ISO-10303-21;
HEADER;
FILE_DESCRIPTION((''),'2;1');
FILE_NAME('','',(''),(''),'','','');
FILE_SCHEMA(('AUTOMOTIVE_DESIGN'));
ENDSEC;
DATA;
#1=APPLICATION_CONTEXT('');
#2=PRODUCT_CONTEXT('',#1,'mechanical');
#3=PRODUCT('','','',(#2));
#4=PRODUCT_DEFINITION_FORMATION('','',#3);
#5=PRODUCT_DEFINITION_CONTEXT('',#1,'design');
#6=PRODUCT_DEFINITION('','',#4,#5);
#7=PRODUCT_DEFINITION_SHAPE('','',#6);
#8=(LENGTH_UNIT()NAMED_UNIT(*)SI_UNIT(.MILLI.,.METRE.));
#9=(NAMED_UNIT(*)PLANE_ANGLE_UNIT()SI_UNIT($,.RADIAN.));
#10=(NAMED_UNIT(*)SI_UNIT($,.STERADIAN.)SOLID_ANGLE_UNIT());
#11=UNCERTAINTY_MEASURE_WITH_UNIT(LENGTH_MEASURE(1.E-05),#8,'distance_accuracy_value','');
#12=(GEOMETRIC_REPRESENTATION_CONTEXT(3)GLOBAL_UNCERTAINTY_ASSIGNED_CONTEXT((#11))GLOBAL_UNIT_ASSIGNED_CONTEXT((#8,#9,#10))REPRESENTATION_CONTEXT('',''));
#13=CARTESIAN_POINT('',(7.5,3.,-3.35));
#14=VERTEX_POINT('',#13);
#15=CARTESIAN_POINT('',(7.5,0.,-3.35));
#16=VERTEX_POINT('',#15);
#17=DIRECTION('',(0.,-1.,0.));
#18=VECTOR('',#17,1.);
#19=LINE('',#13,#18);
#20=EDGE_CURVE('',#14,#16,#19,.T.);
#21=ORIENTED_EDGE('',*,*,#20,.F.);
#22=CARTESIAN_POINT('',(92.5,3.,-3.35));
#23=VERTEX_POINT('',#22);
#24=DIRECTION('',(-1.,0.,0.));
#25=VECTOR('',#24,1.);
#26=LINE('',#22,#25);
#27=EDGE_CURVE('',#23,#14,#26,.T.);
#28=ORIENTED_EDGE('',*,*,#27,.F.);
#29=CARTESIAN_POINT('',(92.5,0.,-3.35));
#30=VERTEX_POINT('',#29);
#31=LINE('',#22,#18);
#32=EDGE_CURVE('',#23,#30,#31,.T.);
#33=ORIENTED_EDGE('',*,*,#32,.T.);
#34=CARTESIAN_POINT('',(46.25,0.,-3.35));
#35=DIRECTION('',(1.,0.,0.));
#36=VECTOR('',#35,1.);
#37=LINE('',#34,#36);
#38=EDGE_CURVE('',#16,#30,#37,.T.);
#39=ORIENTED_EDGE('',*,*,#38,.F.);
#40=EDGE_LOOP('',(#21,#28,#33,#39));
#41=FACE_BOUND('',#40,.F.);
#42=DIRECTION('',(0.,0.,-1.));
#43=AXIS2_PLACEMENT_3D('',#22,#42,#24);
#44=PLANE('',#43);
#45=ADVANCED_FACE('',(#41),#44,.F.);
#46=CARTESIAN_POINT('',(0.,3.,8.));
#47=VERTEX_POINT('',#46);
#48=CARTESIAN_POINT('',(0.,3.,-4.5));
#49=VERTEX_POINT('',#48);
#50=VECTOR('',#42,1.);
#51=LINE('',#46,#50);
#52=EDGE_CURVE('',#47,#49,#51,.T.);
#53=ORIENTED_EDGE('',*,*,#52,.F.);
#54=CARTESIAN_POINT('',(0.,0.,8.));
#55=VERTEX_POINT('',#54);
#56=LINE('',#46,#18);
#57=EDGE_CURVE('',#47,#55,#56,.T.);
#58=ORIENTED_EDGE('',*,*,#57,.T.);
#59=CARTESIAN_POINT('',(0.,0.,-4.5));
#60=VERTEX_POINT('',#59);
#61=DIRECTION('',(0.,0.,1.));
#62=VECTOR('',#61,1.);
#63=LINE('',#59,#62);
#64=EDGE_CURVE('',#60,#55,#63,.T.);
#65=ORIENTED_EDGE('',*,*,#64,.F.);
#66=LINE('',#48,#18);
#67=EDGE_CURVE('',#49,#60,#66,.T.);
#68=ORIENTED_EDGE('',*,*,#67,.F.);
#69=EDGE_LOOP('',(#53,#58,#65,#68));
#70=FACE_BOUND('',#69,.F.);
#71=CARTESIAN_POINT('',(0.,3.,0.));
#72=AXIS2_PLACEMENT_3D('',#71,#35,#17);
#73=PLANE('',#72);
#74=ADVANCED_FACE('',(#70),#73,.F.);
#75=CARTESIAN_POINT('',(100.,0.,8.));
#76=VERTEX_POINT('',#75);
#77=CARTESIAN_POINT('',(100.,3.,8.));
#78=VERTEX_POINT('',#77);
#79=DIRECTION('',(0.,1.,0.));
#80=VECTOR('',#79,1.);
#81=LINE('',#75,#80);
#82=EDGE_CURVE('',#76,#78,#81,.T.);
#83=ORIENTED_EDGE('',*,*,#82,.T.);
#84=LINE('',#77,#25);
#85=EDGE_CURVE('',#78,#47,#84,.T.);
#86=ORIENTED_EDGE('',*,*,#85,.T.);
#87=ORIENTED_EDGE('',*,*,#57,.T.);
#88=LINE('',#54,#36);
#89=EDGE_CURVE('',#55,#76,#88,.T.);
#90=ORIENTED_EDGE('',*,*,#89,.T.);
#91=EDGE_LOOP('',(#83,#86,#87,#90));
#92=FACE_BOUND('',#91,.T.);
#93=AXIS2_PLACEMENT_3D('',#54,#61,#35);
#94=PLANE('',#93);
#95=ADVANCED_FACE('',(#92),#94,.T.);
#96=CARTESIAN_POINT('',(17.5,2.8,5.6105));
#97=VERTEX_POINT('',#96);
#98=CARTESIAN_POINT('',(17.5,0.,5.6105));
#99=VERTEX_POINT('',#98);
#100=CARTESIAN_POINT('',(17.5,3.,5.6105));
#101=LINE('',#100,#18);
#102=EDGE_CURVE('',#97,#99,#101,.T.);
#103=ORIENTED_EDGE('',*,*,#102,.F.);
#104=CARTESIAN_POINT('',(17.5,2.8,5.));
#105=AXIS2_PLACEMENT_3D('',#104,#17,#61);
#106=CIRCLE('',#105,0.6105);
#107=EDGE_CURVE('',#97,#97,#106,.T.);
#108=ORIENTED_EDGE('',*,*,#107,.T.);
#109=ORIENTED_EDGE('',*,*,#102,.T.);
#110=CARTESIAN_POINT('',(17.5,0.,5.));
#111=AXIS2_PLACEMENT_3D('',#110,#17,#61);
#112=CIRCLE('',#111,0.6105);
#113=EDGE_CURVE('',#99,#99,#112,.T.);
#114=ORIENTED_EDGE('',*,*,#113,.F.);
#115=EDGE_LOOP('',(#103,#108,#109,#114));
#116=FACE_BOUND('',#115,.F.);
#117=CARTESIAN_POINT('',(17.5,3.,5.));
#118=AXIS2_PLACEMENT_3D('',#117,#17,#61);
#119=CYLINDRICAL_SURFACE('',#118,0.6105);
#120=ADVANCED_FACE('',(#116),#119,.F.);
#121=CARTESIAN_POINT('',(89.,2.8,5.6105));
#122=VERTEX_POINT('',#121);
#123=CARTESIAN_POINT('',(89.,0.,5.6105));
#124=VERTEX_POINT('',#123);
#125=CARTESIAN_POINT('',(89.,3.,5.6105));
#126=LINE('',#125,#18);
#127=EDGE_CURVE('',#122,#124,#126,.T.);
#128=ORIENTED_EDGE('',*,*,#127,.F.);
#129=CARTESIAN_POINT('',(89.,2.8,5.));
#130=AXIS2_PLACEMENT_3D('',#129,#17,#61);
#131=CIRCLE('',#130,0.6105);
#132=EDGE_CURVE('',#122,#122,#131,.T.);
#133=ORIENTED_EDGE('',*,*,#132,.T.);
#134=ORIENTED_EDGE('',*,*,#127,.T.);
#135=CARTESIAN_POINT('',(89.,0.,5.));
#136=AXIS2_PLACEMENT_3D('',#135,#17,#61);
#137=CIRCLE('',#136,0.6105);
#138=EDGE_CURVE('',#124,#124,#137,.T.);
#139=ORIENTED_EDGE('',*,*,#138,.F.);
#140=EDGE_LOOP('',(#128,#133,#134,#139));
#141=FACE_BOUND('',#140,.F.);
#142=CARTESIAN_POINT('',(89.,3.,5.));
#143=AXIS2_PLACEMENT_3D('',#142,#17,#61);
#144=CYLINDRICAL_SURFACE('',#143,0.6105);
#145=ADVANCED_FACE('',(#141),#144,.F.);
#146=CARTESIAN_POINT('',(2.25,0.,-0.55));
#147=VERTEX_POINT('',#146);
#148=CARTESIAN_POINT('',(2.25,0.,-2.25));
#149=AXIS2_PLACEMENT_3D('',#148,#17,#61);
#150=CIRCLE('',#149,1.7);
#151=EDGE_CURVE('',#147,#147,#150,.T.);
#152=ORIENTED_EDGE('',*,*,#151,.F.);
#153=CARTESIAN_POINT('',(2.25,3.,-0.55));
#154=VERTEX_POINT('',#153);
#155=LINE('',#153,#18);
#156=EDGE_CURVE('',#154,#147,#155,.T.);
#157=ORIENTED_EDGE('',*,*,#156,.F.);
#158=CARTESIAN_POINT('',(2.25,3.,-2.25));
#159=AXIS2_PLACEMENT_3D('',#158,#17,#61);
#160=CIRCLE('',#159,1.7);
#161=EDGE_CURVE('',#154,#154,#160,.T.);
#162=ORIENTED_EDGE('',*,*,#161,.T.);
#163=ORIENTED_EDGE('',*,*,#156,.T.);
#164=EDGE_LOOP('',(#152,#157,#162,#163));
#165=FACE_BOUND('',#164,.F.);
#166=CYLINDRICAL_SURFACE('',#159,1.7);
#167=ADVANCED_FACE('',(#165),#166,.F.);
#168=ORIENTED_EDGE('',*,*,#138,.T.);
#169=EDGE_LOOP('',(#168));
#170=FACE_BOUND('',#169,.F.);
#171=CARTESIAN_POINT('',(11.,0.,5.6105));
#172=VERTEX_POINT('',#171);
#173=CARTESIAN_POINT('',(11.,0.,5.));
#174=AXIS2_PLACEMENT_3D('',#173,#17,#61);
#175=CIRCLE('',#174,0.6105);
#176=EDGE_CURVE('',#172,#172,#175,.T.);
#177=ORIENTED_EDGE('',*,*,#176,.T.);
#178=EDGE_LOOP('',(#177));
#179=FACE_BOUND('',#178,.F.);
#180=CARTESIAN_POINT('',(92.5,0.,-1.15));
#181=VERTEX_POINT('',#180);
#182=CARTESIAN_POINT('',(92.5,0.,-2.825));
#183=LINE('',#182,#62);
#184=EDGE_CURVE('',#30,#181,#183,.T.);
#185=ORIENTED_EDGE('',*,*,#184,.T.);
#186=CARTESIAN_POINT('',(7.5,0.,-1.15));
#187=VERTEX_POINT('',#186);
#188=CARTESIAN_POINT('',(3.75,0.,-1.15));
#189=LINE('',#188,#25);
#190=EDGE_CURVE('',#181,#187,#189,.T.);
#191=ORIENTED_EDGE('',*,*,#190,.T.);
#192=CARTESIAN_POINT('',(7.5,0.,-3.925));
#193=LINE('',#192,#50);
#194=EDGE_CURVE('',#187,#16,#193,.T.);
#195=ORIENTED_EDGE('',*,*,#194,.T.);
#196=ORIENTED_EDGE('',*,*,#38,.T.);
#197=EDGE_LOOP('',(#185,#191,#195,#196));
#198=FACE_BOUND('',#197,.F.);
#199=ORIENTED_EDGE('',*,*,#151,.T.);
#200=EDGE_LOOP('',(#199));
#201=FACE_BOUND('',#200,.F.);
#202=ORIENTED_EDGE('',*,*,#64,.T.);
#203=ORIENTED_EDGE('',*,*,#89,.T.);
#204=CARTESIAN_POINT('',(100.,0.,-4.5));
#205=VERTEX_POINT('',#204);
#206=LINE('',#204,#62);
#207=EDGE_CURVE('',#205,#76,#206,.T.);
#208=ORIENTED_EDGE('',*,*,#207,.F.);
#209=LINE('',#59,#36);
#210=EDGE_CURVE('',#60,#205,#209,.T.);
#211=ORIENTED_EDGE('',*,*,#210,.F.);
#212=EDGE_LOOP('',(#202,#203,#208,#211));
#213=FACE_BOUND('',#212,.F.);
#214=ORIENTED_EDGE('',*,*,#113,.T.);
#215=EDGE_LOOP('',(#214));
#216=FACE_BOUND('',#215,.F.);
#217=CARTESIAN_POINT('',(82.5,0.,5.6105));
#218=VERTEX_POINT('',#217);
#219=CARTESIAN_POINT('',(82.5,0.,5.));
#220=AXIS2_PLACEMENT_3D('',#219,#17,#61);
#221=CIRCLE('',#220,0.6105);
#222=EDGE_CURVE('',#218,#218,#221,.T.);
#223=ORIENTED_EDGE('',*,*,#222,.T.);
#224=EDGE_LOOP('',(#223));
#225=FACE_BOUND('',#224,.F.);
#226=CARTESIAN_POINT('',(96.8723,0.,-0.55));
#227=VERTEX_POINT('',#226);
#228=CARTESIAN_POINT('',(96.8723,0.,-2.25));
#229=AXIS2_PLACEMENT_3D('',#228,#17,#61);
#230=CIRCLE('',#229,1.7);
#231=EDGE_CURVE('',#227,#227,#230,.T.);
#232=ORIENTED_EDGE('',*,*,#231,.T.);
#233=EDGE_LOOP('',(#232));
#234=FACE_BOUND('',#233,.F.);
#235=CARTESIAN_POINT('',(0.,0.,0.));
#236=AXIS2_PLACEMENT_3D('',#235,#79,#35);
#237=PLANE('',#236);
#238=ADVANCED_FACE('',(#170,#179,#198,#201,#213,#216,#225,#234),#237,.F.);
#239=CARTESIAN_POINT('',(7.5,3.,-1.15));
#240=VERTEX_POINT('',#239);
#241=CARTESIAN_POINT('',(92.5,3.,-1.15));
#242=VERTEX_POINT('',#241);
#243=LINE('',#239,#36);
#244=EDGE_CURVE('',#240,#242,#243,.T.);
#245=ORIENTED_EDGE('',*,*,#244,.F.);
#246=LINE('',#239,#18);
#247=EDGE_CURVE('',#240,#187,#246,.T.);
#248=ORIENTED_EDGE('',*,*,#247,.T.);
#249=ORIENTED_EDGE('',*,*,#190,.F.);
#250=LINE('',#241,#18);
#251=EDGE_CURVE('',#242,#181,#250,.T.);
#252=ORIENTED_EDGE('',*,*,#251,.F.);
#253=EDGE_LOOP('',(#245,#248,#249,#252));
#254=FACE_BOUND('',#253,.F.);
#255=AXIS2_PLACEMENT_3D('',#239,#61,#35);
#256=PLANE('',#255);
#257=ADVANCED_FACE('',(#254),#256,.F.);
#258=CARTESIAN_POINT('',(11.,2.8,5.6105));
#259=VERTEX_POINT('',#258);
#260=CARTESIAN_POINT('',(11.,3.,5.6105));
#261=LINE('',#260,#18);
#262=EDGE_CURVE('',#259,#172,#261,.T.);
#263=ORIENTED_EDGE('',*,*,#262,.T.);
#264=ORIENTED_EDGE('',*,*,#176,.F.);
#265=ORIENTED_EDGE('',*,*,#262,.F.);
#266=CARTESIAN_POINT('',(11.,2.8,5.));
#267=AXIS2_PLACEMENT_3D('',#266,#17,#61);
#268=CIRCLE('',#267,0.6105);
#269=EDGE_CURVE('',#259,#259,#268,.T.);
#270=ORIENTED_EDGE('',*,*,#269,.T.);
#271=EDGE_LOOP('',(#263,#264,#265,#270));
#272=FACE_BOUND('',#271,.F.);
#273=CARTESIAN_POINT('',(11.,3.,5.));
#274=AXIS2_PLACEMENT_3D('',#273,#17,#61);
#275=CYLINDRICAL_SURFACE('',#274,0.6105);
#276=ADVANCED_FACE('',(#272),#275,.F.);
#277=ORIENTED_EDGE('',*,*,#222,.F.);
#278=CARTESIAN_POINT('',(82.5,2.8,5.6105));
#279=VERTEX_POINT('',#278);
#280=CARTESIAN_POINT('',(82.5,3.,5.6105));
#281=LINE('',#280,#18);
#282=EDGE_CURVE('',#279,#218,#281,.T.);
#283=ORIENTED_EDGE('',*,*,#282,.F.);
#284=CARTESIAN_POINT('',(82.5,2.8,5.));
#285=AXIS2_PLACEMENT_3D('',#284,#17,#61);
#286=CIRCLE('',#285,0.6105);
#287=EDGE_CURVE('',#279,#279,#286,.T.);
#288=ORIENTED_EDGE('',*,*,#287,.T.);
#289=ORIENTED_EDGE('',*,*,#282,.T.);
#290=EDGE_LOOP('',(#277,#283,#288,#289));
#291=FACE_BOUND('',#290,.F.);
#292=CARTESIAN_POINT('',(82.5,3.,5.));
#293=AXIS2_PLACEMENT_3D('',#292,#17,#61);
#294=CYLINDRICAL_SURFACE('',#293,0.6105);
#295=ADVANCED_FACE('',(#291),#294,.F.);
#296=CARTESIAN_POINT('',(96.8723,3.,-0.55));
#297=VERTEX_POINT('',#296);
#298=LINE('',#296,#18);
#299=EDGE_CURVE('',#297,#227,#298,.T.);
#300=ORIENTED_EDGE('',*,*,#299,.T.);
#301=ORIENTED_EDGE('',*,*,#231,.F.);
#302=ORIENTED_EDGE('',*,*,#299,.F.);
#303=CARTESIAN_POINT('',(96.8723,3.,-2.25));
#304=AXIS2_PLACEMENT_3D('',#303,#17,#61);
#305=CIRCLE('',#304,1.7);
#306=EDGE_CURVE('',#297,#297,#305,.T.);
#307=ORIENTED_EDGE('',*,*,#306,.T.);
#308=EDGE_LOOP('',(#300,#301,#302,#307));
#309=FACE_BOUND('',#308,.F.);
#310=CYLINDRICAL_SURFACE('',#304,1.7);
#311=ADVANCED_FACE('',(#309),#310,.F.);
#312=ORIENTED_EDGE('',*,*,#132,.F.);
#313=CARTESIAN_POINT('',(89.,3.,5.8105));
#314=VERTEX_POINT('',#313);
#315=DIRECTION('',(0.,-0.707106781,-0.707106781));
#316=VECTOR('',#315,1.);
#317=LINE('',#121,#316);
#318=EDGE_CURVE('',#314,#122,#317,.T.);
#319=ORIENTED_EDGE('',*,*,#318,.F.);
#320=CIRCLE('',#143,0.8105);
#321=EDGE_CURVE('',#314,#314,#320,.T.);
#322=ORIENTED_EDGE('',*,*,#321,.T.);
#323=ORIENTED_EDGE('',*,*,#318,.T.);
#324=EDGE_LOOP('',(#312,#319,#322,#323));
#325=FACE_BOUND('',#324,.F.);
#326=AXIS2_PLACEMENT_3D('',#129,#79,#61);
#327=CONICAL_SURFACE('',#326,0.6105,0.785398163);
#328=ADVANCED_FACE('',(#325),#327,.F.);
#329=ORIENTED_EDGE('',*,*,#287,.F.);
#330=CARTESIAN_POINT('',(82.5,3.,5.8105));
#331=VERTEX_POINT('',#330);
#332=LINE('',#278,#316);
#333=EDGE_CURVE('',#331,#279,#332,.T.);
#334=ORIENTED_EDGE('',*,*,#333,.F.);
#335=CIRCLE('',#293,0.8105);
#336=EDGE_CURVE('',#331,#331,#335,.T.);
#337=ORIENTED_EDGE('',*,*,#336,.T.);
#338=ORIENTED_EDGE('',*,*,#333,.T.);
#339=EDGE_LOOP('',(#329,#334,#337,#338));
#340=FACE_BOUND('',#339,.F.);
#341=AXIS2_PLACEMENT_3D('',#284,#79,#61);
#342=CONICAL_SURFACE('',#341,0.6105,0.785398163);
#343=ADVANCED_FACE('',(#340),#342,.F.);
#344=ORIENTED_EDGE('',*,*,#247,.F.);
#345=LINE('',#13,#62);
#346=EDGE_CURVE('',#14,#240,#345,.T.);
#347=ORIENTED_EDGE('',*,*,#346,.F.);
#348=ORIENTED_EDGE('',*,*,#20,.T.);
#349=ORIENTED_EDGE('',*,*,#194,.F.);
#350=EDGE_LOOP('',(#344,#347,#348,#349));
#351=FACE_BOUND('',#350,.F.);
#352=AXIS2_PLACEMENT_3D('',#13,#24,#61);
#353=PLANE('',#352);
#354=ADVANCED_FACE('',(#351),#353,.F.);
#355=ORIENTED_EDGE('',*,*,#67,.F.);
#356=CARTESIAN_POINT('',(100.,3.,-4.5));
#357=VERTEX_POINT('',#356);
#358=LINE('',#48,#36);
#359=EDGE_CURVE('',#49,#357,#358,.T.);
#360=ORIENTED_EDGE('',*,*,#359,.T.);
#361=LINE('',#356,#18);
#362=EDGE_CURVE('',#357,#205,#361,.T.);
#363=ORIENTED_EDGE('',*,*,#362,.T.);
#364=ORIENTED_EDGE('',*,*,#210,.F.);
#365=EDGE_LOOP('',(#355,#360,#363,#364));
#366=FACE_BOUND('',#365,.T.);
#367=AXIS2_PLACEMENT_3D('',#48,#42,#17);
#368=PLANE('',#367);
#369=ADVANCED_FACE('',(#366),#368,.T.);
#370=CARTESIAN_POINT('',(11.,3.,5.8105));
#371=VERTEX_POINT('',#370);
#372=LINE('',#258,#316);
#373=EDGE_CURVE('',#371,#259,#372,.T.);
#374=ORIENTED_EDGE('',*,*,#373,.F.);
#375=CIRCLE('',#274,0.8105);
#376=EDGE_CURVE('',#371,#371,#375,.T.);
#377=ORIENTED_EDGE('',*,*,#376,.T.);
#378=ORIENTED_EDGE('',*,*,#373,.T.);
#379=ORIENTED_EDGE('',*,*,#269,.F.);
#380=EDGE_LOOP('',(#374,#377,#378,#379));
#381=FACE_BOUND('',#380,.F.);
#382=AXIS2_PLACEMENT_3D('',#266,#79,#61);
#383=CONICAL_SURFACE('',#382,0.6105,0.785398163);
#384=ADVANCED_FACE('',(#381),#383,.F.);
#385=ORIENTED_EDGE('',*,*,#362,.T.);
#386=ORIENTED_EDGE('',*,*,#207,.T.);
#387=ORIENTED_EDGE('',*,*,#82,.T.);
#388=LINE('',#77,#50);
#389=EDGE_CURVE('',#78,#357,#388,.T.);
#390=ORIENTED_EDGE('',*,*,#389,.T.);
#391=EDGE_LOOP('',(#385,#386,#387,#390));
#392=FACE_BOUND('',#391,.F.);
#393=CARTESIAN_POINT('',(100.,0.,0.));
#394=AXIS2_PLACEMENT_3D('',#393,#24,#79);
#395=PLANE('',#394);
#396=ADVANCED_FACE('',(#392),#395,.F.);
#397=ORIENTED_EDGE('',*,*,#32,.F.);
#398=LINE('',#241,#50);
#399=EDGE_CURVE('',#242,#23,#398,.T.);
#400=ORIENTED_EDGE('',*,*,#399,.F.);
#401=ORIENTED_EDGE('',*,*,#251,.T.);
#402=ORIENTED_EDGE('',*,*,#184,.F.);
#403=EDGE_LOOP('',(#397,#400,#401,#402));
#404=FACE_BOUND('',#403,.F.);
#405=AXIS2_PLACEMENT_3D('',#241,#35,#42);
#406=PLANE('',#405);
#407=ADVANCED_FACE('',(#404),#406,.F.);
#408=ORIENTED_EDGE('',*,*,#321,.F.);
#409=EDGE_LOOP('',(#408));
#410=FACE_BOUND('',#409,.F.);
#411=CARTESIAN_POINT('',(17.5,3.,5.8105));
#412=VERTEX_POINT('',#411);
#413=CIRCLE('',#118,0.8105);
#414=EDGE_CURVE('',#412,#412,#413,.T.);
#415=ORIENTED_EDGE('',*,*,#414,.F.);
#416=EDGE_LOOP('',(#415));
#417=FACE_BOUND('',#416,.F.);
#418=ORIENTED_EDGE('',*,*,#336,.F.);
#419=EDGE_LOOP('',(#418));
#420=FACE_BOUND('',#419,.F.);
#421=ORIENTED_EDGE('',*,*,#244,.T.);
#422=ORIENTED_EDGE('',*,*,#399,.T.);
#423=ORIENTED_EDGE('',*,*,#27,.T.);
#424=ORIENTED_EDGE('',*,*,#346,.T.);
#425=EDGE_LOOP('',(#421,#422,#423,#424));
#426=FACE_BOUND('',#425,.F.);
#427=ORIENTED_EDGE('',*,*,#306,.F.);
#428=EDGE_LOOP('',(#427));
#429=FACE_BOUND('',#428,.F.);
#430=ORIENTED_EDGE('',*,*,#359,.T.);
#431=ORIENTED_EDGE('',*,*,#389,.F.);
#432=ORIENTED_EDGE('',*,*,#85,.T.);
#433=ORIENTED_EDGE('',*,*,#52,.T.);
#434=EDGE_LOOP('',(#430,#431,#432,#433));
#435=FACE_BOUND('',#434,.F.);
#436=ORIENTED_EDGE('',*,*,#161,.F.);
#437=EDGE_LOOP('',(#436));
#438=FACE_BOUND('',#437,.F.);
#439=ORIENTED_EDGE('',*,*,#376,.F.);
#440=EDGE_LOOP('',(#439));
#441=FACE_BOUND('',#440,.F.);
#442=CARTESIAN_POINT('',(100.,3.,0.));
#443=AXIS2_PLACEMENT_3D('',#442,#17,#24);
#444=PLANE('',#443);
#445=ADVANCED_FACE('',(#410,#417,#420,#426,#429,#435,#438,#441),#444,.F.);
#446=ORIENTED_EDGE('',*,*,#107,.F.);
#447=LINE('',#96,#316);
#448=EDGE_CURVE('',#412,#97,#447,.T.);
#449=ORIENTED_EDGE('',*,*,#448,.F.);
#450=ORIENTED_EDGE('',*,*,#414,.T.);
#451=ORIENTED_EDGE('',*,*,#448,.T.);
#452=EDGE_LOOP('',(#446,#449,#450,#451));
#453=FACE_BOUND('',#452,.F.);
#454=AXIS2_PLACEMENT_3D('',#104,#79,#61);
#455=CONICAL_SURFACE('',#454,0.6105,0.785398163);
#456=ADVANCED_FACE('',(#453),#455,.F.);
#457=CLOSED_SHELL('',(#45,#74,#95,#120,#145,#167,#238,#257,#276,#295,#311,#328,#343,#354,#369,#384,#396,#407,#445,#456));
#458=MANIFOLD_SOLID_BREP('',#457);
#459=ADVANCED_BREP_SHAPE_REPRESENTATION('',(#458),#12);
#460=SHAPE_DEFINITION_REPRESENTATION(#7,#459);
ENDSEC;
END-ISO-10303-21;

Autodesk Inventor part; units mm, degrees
ref_plane "YZ Plane" through (0, 0, 0) normal (1, 0, 0) x (0, 1, 0)
ref_plane "XZ Plane" through (0, 0, 0) normal (0, 1, 0) x (-1, 0, 0)
ref_plane "XY Plane" through (0, 0, 0) normal (0, 0, 1) x (1, 0, 0)
sketch "Sketch4" plane through (0, 0, 0) normal (1, 0, 0) x (0, 1, 0)
  line L0 (0, 0) -> (3, 0)
  line L1 (3, 0) -> (3, -4.5)
  line L2 (3, -4.5) -> (0, -4.5)
  line L3 (0, -4.5) -> (0, 0)
  dimension "d21" = 3
  dimension "d22" = 4.5
extrude "Extrusion2" add sketch "Sketch4" along normal blind 100
sketch "Sketch5" plane through (0, 3, 0) normal (0, 1, 0) x (1, 0, 0)
  circle A0 centre (2.25, 2.25) radius 1.5
  circle A1 centre (96.8723, 2.25) radius 1.5
  line L0 (0, 4.5) -> (0, 0) construction
  line L1 (0, 0) -> (100, 0) construction
  dimension "d25" = 3
  dimension "d26" = 3
  dimension "d27" = 2.25
  dimension "d28" = 2.25
  dimension "d29" = 4.5
hole "Hole2" at (2.25, 3, -2.25) at (96.8723, 3, -2.25) direction (0, -1, 0) diameter 3.4 depth 8.8 tip angle 118 clearance for "Socket Head Cap Screw ISO 4762" size "M3" standard "ISO"
sketch "Sketch6" plane through (0, 3, 0) normal (0, 1, 0) x (1, 0, 0)
  line L0 (7.5, 1.15) -> (92.5, 1.15)
  line L1 (92.5, 1.15) -> (92.5, 3.35)
  line L2 (92.5, 3.35) -> (7.5, 3.35)
  line L3 (7.5, 3.35) -> (7.5, 1.15)
  line L4 (0, 4.5) -> (100, 4.5) projected
  line L5 (0, 0) -> (100, 0) projected
  line L6 (0, 4.5) -> (0, 0) projected
  dimension "d37" = 85
  dimension "d38" = 2.2
  dimension "d39" = 4.5
  dimension "d40" = 1.15
  dimension "d41" = 7.5
extrude "Extrusion3" cut sketch "Sketch6" against normal blind 100
sketch "Sketch7" plane through (0, 0, 0) normal (0, 0, 1) x (1, 0, 0)
  line L0 (0, 0) -> (100, 0)
  line L1 (100, 0) -> (100, 3)
  line L2 (100, 3) -> (0, 3)
  line L3 (0, 3) -> (0, 0)
extrude "Extrusion4" add sketch "Sketch7" along normal blind 8
sketch "Sketch8" plane through (0, 3, -4.5) normal (0, 1, 0) x (1, 0, 0)
  line L0 (11, -9.5) -> (89, -9.5) construction
  line L1 (0, 0) -> (0, -12.5) projected
  line L2 (-1, -16) -> (89, -16) construction
  line L3 (-1, -17) -> (89, -17) construction
  line L4 (89, -15) -> (-1, -15) construction
  arc A0 (-1, -15) -> (-1, -17) centre (-1, -16) ccw construction
  arc A1 (89, -17) -> (89, -15) centre (89, -16) ccw construction
  circle A2 centre (11, -9.5) radius 1
  circle A3 centre (89, -9.5) radius 1
  circle A4 centre (82.5, -9.5) radius 1
  circle A5 centre (17.5, -9.5) radius 1
  point P0 (0, -4.5)
  point P1 (50, -9.5)
  point P2 (44, -16)
  dimension "d47" = 78
  dimension "d48" = 50
  dimension "d49" = 2
  dimension "d50" = 90
  dimension "d51" = 6.5
  dimension "d54" = 9.5
  dimension "d55" = 2
  dimension "d56" = 2
  dimension "d57" = 2
  dimension "d58" = 2
  dimension "d59" = 6.5
  dimension "d60" = 6.5
sketch "Sketch9" plane through (0, 0, -4.5) normal (0, -1, 0) x (1, 0, 0)
  point P0 (0, 4.5)
sketch "Sketch10" plane through (0, 0, -4.5) normal (0, -1, 0) x (1, 0, 0)
  point P0 (0, 4.5)
hole "Hole3" at (11, 3, 5) at (17.5, 3, 5) at (82.5, 3, 5) at (89, 3, 5) direction (0, -1, 0) diameter 1.221 depth 5.3 tip angle 118 thread size "M1.6x0.35" class "6H" standard "ISO Metric profile"
chamfer "Chamfer1" distance 0.2 angle 45 4 edges at (11, 3, 4.3895) (17.5, 3, 4.3895) (82.5, 3, 4.3895) (89, 3, 4.3895)
equation "\"d27\" = d28"
equation "\"d28\" = 0.5 * d29"
properties part number "szyna"
